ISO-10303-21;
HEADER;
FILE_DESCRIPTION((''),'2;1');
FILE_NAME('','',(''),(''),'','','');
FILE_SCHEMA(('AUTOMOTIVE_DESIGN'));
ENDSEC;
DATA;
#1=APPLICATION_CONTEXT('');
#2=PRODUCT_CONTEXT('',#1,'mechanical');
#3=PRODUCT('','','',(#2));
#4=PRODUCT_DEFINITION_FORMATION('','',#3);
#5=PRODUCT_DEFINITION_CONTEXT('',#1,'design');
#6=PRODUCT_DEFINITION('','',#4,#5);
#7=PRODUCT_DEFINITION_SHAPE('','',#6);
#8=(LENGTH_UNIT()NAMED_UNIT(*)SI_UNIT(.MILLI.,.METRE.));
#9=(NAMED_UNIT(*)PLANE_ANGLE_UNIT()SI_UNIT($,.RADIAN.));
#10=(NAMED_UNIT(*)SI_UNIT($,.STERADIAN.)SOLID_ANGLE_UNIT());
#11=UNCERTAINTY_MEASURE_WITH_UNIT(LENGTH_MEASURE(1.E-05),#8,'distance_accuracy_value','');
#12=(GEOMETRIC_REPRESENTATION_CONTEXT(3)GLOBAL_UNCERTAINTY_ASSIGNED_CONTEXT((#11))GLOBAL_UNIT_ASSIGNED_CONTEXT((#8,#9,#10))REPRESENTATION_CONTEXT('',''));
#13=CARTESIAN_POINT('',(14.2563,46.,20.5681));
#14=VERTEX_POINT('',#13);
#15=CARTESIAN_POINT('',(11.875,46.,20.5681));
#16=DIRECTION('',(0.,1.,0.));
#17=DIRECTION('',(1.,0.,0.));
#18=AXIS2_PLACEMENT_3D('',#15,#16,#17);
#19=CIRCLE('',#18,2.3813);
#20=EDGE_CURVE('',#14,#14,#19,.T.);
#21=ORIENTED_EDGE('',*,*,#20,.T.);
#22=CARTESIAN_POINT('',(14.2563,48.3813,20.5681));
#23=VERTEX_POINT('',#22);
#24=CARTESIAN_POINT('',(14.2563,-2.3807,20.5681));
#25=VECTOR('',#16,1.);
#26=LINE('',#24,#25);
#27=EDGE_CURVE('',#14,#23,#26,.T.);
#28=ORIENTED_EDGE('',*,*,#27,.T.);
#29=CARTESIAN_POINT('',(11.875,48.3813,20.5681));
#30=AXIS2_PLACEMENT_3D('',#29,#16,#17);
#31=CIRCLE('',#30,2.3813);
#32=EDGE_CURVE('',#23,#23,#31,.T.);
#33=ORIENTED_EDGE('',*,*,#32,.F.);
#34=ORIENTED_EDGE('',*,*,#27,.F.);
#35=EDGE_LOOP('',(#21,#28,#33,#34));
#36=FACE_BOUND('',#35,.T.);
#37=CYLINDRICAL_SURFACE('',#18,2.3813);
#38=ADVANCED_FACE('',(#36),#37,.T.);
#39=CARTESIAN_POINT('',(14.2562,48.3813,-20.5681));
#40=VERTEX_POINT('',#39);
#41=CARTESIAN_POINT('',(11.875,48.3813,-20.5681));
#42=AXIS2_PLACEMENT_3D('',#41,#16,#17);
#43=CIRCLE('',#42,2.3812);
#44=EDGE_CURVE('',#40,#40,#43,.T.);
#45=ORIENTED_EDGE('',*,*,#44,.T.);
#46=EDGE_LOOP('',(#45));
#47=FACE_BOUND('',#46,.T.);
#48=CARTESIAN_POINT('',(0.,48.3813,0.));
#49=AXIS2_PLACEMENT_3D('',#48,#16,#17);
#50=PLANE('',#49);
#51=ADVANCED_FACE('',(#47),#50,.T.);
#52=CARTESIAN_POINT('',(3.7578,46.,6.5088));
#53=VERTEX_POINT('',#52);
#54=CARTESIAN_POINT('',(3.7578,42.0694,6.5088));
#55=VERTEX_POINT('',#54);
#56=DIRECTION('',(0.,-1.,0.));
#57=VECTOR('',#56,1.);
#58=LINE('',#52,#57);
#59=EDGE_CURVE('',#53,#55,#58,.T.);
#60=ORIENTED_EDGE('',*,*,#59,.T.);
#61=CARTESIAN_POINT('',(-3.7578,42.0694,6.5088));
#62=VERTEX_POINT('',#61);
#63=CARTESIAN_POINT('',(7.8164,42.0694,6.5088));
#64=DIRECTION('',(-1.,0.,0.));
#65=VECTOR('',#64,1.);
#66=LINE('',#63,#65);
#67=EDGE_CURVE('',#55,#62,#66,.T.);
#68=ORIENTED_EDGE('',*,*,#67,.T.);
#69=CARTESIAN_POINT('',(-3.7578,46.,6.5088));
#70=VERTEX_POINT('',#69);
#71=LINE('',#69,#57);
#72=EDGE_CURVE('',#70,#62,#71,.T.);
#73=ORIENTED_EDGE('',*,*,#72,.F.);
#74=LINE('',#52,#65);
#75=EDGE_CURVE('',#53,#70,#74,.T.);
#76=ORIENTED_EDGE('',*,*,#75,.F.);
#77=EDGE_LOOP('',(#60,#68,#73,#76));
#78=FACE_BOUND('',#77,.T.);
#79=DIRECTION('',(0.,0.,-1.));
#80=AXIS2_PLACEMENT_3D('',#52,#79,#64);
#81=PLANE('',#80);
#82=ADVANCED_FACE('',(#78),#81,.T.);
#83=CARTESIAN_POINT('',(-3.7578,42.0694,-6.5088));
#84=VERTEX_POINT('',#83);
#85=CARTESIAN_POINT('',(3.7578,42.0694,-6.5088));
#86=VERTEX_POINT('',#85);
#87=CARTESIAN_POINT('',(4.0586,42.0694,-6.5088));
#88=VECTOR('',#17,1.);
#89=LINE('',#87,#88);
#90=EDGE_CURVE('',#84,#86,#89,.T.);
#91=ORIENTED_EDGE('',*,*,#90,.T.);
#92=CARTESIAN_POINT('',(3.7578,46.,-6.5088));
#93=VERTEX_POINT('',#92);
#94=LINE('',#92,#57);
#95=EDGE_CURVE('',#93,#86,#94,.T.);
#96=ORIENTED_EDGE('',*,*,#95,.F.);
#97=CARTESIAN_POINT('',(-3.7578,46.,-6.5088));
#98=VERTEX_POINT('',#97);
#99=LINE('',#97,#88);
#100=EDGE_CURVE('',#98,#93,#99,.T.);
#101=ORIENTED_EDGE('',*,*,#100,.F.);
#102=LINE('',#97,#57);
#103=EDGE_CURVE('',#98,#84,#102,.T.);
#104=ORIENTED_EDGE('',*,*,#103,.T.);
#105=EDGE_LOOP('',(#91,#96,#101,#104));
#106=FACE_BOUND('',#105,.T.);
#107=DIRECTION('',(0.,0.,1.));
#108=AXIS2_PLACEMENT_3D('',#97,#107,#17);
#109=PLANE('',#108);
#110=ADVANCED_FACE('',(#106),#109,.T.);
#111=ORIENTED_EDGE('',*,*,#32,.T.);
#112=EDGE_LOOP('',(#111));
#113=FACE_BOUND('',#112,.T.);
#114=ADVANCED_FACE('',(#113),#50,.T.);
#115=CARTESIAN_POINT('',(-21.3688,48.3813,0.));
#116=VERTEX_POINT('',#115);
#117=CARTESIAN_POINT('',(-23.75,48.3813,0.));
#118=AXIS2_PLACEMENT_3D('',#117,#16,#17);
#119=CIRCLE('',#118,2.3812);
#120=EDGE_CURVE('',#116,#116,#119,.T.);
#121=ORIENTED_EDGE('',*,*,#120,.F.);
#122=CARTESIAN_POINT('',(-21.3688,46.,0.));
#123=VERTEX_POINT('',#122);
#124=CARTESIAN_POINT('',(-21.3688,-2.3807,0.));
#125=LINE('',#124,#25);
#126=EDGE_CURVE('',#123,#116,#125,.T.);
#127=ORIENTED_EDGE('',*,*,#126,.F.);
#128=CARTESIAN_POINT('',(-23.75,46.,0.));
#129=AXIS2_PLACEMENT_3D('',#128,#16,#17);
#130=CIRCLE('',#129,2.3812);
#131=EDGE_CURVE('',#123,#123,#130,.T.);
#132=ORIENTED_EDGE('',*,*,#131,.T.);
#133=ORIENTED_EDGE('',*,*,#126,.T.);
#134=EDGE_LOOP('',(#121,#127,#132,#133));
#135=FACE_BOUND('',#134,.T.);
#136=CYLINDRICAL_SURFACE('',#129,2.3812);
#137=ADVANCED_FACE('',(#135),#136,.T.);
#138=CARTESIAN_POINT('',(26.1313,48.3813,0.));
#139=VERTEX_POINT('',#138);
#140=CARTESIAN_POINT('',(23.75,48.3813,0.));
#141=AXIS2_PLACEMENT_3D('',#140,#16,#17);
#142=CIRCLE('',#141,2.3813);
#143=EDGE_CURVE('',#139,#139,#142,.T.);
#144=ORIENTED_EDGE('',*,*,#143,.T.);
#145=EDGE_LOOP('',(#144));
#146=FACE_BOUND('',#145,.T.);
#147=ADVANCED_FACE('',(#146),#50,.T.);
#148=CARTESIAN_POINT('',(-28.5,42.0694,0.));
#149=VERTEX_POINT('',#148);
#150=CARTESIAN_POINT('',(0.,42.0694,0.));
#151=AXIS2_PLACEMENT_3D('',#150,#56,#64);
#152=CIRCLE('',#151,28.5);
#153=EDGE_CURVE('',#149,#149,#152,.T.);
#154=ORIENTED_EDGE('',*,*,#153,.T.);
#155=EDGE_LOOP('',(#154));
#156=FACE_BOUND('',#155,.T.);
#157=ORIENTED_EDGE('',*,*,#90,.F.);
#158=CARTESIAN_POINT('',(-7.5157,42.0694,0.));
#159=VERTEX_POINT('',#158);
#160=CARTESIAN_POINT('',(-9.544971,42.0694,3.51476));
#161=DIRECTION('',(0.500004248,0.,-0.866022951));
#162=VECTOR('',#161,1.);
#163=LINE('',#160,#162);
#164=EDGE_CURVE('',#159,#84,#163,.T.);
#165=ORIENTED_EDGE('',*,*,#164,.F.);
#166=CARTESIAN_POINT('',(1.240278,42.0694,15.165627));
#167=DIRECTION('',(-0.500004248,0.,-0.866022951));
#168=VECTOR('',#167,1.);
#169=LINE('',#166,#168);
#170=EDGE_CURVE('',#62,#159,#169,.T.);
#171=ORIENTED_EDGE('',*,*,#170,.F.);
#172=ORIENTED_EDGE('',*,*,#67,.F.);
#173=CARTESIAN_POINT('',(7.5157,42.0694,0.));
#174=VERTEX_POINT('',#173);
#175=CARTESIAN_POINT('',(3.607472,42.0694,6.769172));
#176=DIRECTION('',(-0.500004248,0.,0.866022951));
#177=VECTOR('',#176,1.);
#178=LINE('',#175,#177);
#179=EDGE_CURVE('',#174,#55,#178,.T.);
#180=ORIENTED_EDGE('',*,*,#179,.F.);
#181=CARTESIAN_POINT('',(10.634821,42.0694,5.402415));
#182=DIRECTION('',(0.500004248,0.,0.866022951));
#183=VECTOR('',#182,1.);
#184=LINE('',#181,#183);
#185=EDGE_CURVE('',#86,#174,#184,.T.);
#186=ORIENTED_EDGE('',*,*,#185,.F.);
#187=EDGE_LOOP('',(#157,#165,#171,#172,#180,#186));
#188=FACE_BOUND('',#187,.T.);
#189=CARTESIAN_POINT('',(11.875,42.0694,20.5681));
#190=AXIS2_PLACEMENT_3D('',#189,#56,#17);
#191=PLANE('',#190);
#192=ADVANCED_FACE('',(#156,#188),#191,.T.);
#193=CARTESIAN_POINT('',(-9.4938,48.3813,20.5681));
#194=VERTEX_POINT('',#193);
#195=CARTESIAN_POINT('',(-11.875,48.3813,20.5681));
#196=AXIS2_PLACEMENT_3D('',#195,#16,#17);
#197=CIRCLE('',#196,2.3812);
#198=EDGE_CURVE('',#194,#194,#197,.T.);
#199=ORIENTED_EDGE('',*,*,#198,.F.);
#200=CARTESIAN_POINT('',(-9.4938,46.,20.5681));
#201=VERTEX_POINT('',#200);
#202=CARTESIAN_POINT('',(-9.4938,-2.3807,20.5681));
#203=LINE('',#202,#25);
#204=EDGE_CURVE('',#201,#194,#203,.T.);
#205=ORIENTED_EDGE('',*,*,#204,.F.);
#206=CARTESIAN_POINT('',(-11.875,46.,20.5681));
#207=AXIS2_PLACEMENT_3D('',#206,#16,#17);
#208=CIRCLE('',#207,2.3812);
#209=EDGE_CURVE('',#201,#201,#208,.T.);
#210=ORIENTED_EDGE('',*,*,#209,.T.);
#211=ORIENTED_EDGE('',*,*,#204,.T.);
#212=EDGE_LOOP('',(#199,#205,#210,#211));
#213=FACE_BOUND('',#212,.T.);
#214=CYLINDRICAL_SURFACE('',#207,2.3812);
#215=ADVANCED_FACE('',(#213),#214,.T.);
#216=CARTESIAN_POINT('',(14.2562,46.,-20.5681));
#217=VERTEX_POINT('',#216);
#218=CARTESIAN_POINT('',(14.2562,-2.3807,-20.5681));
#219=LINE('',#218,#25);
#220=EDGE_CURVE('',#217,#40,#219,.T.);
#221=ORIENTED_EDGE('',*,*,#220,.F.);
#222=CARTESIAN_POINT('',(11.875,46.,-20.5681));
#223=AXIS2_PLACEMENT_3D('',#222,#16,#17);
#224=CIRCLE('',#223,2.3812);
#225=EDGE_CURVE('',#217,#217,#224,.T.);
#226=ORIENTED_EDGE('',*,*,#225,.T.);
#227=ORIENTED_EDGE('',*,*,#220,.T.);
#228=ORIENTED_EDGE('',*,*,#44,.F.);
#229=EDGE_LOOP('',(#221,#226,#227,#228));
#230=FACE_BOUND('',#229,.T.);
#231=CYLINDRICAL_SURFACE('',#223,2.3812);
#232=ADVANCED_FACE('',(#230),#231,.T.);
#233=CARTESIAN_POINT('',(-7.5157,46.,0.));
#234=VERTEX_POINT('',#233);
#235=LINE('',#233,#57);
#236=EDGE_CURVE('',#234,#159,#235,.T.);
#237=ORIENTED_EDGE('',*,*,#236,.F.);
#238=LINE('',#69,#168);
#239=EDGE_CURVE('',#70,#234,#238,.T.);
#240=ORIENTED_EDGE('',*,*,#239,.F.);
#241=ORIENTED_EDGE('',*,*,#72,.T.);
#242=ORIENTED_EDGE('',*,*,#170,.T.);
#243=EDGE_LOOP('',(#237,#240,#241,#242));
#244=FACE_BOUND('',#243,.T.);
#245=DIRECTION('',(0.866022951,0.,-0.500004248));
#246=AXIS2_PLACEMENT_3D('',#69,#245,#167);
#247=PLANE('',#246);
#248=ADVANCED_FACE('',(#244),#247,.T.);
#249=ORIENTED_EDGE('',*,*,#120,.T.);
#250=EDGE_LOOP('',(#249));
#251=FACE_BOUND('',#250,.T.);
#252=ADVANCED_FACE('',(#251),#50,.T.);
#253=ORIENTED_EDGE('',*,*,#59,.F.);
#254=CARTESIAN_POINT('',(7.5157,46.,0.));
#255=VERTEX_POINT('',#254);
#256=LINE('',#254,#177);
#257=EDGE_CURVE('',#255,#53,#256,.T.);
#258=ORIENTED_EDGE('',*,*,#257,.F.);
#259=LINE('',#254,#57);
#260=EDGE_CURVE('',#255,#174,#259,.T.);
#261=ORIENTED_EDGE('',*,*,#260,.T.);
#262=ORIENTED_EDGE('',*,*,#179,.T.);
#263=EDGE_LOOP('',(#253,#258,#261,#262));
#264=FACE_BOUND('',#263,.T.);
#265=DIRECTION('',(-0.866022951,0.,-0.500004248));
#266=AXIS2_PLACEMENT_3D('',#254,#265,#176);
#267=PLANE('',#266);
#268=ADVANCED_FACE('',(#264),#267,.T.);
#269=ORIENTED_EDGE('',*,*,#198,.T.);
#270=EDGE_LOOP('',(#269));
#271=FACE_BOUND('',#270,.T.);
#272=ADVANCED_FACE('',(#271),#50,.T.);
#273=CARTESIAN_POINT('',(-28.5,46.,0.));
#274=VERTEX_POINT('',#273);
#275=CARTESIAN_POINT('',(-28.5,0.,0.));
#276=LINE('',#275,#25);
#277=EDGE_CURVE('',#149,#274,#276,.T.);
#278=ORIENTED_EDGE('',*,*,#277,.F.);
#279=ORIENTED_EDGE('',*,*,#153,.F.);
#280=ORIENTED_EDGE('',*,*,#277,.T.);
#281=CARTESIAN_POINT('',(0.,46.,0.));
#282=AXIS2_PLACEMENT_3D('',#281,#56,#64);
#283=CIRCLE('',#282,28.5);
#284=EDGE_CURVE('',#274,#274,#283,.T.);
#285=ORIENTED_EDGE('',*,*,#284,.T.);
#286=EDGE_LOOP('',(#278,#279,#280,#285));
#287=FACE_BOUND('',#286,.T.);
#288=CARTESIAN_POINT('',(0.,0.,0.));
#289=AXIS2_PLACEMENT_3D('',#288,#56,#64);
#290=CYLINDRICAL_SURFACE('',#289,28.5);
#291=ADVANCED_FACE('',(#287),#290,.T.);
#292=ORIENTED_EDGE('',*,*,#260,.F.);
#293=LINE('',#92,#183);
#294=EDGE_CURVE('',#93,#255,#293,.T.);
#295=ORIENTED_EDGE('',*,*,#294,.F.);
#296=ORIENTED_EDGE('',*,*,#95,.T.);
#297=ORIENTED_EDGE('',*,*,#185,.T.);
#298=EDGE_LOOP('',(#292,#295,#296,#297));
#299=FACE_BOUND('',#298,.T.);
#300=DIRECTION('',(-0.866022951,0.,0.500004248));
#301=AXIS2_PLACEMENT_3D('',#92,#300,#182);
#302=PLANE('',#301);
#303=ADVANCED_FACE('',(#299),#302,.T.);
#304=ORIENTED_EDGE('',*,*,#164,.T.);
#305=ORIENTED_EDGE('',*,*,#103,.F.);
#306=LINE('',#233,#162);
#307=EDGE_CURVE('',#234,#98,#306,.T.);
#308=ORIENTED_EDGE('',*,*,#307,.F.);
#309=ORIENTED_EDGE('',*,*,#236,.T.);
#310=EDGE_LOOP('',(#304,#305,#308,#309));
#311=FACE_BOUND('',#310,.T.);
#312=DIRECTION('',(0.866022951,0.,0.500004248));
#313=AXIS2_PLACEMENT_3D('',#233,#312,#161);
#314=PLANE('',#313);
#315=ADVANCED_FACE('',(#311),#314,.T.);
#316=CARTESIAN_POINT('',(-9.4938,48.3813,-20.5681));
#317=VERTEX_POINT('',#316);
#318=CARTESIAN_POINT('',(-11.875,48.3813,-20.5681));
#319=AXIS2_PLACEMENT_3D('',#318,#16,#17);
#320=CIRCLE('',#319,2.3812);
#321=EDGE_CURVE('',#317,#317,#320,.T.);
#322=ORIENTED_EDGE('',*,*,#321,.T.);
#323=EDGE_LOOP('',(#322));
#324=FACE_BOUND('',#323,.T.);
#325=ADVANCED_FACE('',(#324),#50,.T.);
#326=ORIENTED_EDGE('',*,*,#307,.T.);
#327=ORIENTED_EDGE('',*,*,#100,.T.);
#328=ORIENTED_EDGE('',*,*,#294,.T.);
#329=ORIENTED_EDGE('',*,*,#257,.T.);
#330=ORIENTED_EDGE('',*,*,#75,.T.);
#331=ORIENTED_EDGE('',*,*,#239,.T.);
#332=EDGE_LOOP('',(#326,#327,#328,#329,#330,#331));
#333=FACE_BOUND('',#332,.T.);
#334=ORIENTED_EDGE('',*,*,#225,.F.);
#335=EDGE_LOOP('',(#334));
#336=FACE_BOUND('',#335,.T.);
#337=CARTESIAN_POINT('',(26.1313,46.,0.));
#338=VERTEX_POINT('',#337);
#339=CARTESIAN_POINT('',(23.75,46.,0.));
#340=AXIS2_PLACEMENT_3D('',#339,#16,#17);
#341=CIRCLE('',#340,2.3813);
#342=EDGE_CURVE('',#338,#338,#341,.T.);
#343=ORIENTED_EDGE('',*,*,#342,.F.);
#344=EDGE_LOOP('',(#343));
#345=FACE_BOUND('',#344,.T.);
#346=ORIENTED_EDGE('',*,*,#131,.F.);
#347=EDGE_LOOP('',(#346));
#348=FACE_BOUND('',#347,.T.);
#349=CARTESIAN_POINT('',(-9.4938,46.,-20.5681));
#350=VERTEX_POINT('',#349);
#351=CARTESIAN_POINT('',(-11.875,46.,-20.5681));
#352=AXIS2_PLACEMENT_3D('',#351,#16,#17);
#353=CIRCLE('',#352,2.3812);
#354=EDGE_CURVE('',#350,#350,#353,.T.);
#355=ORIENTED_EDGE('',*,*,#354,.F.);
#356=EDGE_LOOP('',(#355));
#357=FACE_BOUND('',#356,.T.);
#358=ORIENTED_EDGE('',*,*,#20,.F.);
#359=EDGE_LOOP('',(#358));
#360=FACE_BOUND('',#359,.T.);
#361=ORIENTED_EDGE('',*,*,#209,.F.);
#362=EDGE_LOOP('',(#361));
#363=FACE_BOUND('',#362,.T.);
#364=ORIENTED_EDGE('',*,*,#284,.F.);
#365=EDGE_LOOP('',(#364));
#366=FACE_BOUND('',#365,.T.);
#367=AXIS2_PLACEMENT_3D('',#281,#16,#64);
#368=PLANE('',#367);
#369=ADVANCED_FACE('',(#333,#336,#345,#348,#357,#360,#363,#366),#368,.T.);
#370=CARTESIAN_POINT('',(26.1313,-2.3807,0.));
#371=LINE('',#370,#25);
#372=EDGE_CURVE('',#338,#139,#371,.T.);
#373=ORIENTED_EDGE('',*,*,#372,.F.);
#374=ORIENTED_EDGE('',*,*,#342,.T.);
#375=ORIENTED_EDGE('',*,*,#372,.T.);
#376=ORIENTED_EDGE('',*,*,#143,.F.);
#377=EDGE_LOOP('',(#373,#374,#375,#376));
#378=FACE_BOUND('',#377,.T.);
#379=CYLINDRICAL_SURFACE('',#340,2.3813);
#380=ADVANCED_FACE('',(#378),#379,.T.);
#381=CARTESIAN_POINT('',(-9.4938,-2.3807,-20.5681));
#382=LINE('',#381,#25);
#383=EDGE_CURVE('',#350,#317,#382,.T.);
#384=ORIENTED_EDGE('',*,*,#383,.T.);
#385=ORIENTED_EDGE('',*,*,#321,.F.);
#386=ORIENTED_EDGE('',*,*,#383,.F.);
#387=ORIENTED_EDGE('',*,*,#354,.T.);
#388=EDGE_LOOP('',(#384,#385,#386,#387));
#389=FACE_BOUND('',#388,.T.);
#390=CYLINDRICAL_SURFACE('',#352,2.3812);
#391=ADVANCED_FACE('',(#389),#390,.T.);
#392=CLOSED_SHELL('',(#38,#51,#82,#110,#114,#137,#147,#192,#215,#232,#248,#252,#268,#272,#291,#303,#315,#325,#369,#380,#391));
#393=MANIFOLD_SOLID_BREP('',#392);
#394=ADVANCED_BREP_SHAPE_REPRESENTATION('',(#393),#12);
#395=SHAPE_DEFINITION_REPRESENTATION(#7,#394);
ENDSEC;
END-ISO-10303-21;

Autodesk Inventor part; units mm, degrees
ref_plane "YZ Plane" through (0, 0, 0) normal (1, 0, 0) x (0, 1, 0)
ref_plane "XZ Plane" through (0, 0, 0) normal (0, 1, 0) x (-1, 0, 0)
ref_plane "XY Plane" through (0, 0, 0) normal (0, 0, 1) x (1, 0, 0)
sketch "Sketch1" plane through (0, 0, 0) normal (0, 1, 0) x (-1, 0, 0)
  circle A0 centre (0, 0) radius 28.5
  circle A1 centre (0, 0) radius 9
  circle A2 centre (11.875, 20.5681) radius 1.5875
  circle A3 centre (-11.875, 20.5681) radius 1.5875
  circle A4 centre (23.75, 0) radius 1.5875
  circle A5 centre (11.875, -20.5681) radius 1.5875
  circle A6 centre (-11.875, -20.5681) radius 1.5875
  circle A7 centre (-23.75, 0) radius 1.5875
  dimension "d5" = 3.175
  dimension "d6" = 20.5681
  dimension "d7" = 3.175
  dimension "d8" = 3.175
  dimension "d9" = 3.175
  dimension "d10" = 3.175
  dimension "d11" = 3.175
extrude "Extrusion1" add sketch "Sketch1" along normal blind 46
sketch "Sketch2" plane through (0, 46, 0) normal (0, 1, 0) x (1, 0, 0)
  line L0 (7.5157, 0) -> (3.7578, -6.5088)
  line L1 (3.7578, -6.5088) -> (-3.7578, -6.5088)
  line L2 (-3.7578, -6.5088) -> (-7.5157, 0)
  line L3 (-7.5157, 0) -> (-3.7578, 6.5088)
  line L4 (-3.7578, 6.5088) -> (3.7578, 6.5088)
  line L5 (3.7578, 6.5088) -> (7.5157, 0)
  circle A0 centre (0, 0) radius 28.5 projected
  circle A1 centre (-11.875, -20.5681) radius 1.5875 projected
  circle A2 centre (11.875, -20.5681) radius 1.5875 projected
  circle A3 centre (-23.75, 0) radius 1.5875 projected
  circle A4 centre (-11.875, 20.5681) radius 1.5875 projected
  circle A5 centre (23.75, 0) radius 1.5875 projected
  circle A6 centre (11.875, 20.5681) radius 1.5875 projected
  dimension "d4" = 13.0175
extrude "Extrusion2" add sketch "Sketch2" against normal blind 46
sketch "Sketch3" plane through (0, 46, 0) normal (0, 1, 0) x (1, 0, 0)
  circle A0 centre (-11.875, 20.5681) radius 1.5875 projected
  circle A1 centre (-11.875, 20.5681) radius 2.3812
  circle A2 centre (11.875, 20.5681) radius 1.5875 projected
  circle A3 centre (11.875, 20.5681) radius 2.3812
  circle A4 centre (23.75, 0) radius 1.5875 projected
  circle A5 centre (23.75, 0) radius 2.3813
  circle A6 centre (11.875, -20.5681) radius 1.5875 projected
  circle A7 centre (11.875, -20.5681) radius 2.3813
  circle A8 centre (-11.875, -20.5681) radius 1.5875 projected
  circle A9 centre (-11.875, -20.5681) radius 2.3812
  circle A10 centre (-23.75, 0) radius 1.5875 projected
  circle A11 centre (-23.75, 0) radius 2.3812
  point P0 (0, 0)
  dimension "d12" = 4.7625
  dimension "d13" = 4.7625
  dimension "d14" = 4.7625
  dimension "d15" = 4.7625
  dimension "d16" = 4.7625
  dimension "d17" = 4.7625
extrude "Extrusion3" add sketch "Sketch3" along normal blind 2.3813 and the other way blind 48.3807 contours A0 | A1 | A2 | A3 | A4 | A5 | A6 | A7 | A8 | A9 | A10 | A11
sketch "Sketch4" plane through (11.875, -2.3806, 20.5681) normal (0, -1, 0) x (1, 0, 0)
  circle A0 centre (-11.875, -20.5681) radius 42.5802
extrude "Extrusion4" cut sketch "Sketch4" against normal blind 44.45
equation "\"d7\" = d5"
equation "\"d8\" = d5"
equation "\"d9\" = d5"
equation "\"d10\" = d5"
equation "\"d11\" = d5"
properties part number "2 thunder axel test v1"
